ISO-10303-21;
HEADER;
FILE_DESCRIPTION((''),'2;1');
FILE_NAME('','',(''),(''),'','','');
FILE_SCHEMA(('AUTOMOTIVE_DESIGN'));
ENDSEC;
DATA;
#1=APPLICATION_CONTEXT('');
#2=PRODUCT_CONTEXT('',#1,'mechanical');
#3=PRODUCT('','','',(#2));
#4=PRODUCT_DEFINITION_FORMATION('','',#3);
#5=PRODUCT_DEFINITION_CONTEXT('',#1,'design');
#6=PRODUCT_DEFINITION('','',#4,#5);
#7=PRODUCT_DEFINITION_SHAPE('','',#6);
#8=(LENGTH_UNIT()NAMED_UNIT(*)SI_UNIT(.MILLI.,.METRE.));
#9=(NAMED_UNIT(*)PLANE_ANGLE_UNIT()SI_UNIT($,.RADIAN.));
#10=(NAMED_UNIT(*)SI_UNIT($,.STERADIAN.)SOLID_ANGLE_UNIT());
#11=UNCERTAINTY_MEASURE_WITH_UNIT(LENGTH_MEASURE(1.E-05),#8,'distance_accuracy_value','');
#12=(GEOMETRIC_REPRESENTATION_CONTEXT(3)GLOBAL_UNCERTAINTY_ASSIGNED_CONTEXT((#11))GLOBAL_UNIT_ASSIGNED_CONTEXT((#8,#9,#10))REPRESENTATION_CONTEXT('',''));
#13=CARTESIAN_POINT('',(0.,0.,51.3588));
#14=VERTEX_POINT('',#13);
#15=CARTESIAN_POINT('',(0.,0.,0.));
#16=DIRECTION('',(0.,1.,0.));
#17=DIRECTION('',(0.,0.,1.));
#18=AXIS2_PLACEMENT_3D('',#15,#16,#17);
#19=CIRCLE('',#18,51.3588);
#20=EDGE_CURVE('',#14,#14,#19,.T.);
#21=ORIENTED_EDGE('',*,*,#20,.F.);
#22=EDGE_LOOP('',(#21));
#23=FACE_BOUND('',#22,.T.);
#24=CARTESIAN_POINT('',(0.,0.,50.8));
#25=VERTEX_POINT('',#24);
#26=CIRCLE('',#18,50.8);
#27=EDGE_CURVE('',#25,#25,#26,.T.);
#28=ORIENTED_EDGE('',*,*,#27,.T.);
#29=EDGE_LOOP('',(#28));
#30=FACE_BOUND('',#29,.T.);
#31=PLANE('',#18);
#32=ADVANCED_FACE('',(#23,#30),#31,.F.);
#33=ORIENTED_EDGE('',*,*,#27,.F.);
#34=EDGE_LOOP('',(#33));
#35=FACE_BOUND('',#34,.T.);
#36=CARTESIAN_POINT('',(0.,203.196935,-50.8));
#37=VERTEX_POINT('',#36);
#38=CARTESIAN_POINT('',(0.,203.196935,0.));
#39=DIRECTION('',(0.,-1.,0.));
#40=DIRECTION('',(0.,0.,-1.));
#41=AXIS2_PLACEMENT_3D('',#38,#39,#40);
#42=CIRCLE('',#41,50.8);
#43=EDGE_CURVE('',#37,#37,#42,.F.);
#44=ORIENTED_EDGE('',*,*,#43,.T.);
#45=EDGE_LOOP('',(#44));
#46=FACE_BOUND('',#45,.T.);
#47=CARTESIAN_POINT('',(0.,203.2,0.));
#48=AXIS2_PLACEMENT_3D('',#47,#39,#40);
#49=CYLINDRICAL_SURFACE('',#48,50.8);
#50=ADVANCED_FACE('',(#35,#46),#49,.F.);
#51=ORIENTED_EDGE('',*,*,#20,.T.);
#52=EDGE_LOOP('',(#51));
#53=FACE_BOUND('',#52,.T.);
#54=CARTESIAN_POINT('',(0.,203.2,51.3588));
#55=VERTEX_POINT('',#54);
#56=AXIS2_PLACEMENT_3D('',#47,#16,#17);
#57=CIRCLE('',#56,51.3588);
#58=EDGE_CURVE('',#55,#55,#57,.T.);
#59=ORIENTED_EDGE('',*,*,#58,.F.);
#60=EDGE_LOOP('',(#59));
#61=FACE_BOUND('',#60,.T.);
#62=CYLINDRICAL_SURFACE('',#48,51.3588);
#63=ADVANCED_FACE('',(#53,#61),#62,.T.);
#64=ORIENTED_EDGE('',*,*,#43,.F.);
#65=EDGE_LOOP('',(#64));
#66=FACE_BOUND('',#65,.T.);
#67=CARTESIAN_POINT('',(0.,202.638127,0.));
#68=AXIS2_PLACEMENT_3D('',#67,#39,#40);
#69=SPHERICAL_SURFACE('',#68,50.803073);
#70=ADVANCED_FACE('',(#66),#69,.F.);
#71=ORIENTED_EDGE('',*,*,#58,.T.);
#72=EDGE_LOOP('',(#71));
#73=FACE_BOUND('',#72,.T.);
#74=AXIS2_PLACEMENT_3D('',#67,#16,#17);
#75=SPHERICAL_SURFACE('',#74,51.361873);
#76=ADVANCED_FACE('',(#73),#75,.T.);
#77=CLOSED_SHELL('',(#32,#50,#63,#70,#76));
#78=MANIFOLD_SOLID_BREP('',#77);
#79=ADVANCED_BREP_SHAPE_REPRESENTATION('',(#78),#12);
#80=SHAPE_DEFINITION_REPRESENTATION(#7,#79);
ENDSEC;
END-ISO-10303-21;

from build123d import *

# Parameters (mm, degrees)
SKETCH1_R           = 51.3588
BOSS_EXTRUDE1_DEPTH = 203.2
DOME1_FACE_RADIUS   = 51.3588
DOME1_HEIGHT        = 50.8


# Read off the part's stored shape, not the designer's step: Shell1
with BuildPart() as part:
    # Sketch1 → Boss-Extrude1 (new body)
    with BuildSketch(Plane(origin=(0, 0, 0), x_dir=(1, 0, 0), z_dir=(0, 1, 0))):
        with Locations(Location((0, 0, 0), (0, 0, 270))):
            Circle(SKETCH1_R)
    extrude(amount=BOSS_EXTRUDE1_DEPTH)

    # Dome1: a dome of height H over a round flat face of radius A is a cap of a sphere of radius (A * A + H * H) / (2 * H)
    dome1_r = (DOME1_FACE_RADIUS * DOME1_FACE_RADIUS + DOME1_HEIGHT * DOME1_HEIGHT) / (2 * DOME1_HEIGHT)
    dome1_base = Plane((0, 203.2, 0), z_dir=(0, 1, 0))
    with Locations(dome1_base.offset(DOME1_HEIGHT - dome1_r)):
        dome1_ball = Sphere(dome1_r, mode=Mode.PRIVATE)
    add(split(dome1_ball, bisect_by=dome1_base, keep=Keep.TOP, mode=Mode.PRIVATE))

    # Shell1 outline → Shell1 (revolve, cut)
    with BuildSketch(Plane.XY):
        with BuildLine():
            Line((50.8, 0), (50.800000001, 203.196935001))
            ThreePointArc((50.800000001, 203.196935001), (35.725082804, 238.75835259), (0, 253.4412))
            Line((0, 253.4412), (0, 0))
            Line((0, 0), (50.8, 0))
        make_face()
    revolve(axis=Axis((0, 0, 0), (0, 1, 0)), mode=Mode.SUBTRACT)


solid = part.part
